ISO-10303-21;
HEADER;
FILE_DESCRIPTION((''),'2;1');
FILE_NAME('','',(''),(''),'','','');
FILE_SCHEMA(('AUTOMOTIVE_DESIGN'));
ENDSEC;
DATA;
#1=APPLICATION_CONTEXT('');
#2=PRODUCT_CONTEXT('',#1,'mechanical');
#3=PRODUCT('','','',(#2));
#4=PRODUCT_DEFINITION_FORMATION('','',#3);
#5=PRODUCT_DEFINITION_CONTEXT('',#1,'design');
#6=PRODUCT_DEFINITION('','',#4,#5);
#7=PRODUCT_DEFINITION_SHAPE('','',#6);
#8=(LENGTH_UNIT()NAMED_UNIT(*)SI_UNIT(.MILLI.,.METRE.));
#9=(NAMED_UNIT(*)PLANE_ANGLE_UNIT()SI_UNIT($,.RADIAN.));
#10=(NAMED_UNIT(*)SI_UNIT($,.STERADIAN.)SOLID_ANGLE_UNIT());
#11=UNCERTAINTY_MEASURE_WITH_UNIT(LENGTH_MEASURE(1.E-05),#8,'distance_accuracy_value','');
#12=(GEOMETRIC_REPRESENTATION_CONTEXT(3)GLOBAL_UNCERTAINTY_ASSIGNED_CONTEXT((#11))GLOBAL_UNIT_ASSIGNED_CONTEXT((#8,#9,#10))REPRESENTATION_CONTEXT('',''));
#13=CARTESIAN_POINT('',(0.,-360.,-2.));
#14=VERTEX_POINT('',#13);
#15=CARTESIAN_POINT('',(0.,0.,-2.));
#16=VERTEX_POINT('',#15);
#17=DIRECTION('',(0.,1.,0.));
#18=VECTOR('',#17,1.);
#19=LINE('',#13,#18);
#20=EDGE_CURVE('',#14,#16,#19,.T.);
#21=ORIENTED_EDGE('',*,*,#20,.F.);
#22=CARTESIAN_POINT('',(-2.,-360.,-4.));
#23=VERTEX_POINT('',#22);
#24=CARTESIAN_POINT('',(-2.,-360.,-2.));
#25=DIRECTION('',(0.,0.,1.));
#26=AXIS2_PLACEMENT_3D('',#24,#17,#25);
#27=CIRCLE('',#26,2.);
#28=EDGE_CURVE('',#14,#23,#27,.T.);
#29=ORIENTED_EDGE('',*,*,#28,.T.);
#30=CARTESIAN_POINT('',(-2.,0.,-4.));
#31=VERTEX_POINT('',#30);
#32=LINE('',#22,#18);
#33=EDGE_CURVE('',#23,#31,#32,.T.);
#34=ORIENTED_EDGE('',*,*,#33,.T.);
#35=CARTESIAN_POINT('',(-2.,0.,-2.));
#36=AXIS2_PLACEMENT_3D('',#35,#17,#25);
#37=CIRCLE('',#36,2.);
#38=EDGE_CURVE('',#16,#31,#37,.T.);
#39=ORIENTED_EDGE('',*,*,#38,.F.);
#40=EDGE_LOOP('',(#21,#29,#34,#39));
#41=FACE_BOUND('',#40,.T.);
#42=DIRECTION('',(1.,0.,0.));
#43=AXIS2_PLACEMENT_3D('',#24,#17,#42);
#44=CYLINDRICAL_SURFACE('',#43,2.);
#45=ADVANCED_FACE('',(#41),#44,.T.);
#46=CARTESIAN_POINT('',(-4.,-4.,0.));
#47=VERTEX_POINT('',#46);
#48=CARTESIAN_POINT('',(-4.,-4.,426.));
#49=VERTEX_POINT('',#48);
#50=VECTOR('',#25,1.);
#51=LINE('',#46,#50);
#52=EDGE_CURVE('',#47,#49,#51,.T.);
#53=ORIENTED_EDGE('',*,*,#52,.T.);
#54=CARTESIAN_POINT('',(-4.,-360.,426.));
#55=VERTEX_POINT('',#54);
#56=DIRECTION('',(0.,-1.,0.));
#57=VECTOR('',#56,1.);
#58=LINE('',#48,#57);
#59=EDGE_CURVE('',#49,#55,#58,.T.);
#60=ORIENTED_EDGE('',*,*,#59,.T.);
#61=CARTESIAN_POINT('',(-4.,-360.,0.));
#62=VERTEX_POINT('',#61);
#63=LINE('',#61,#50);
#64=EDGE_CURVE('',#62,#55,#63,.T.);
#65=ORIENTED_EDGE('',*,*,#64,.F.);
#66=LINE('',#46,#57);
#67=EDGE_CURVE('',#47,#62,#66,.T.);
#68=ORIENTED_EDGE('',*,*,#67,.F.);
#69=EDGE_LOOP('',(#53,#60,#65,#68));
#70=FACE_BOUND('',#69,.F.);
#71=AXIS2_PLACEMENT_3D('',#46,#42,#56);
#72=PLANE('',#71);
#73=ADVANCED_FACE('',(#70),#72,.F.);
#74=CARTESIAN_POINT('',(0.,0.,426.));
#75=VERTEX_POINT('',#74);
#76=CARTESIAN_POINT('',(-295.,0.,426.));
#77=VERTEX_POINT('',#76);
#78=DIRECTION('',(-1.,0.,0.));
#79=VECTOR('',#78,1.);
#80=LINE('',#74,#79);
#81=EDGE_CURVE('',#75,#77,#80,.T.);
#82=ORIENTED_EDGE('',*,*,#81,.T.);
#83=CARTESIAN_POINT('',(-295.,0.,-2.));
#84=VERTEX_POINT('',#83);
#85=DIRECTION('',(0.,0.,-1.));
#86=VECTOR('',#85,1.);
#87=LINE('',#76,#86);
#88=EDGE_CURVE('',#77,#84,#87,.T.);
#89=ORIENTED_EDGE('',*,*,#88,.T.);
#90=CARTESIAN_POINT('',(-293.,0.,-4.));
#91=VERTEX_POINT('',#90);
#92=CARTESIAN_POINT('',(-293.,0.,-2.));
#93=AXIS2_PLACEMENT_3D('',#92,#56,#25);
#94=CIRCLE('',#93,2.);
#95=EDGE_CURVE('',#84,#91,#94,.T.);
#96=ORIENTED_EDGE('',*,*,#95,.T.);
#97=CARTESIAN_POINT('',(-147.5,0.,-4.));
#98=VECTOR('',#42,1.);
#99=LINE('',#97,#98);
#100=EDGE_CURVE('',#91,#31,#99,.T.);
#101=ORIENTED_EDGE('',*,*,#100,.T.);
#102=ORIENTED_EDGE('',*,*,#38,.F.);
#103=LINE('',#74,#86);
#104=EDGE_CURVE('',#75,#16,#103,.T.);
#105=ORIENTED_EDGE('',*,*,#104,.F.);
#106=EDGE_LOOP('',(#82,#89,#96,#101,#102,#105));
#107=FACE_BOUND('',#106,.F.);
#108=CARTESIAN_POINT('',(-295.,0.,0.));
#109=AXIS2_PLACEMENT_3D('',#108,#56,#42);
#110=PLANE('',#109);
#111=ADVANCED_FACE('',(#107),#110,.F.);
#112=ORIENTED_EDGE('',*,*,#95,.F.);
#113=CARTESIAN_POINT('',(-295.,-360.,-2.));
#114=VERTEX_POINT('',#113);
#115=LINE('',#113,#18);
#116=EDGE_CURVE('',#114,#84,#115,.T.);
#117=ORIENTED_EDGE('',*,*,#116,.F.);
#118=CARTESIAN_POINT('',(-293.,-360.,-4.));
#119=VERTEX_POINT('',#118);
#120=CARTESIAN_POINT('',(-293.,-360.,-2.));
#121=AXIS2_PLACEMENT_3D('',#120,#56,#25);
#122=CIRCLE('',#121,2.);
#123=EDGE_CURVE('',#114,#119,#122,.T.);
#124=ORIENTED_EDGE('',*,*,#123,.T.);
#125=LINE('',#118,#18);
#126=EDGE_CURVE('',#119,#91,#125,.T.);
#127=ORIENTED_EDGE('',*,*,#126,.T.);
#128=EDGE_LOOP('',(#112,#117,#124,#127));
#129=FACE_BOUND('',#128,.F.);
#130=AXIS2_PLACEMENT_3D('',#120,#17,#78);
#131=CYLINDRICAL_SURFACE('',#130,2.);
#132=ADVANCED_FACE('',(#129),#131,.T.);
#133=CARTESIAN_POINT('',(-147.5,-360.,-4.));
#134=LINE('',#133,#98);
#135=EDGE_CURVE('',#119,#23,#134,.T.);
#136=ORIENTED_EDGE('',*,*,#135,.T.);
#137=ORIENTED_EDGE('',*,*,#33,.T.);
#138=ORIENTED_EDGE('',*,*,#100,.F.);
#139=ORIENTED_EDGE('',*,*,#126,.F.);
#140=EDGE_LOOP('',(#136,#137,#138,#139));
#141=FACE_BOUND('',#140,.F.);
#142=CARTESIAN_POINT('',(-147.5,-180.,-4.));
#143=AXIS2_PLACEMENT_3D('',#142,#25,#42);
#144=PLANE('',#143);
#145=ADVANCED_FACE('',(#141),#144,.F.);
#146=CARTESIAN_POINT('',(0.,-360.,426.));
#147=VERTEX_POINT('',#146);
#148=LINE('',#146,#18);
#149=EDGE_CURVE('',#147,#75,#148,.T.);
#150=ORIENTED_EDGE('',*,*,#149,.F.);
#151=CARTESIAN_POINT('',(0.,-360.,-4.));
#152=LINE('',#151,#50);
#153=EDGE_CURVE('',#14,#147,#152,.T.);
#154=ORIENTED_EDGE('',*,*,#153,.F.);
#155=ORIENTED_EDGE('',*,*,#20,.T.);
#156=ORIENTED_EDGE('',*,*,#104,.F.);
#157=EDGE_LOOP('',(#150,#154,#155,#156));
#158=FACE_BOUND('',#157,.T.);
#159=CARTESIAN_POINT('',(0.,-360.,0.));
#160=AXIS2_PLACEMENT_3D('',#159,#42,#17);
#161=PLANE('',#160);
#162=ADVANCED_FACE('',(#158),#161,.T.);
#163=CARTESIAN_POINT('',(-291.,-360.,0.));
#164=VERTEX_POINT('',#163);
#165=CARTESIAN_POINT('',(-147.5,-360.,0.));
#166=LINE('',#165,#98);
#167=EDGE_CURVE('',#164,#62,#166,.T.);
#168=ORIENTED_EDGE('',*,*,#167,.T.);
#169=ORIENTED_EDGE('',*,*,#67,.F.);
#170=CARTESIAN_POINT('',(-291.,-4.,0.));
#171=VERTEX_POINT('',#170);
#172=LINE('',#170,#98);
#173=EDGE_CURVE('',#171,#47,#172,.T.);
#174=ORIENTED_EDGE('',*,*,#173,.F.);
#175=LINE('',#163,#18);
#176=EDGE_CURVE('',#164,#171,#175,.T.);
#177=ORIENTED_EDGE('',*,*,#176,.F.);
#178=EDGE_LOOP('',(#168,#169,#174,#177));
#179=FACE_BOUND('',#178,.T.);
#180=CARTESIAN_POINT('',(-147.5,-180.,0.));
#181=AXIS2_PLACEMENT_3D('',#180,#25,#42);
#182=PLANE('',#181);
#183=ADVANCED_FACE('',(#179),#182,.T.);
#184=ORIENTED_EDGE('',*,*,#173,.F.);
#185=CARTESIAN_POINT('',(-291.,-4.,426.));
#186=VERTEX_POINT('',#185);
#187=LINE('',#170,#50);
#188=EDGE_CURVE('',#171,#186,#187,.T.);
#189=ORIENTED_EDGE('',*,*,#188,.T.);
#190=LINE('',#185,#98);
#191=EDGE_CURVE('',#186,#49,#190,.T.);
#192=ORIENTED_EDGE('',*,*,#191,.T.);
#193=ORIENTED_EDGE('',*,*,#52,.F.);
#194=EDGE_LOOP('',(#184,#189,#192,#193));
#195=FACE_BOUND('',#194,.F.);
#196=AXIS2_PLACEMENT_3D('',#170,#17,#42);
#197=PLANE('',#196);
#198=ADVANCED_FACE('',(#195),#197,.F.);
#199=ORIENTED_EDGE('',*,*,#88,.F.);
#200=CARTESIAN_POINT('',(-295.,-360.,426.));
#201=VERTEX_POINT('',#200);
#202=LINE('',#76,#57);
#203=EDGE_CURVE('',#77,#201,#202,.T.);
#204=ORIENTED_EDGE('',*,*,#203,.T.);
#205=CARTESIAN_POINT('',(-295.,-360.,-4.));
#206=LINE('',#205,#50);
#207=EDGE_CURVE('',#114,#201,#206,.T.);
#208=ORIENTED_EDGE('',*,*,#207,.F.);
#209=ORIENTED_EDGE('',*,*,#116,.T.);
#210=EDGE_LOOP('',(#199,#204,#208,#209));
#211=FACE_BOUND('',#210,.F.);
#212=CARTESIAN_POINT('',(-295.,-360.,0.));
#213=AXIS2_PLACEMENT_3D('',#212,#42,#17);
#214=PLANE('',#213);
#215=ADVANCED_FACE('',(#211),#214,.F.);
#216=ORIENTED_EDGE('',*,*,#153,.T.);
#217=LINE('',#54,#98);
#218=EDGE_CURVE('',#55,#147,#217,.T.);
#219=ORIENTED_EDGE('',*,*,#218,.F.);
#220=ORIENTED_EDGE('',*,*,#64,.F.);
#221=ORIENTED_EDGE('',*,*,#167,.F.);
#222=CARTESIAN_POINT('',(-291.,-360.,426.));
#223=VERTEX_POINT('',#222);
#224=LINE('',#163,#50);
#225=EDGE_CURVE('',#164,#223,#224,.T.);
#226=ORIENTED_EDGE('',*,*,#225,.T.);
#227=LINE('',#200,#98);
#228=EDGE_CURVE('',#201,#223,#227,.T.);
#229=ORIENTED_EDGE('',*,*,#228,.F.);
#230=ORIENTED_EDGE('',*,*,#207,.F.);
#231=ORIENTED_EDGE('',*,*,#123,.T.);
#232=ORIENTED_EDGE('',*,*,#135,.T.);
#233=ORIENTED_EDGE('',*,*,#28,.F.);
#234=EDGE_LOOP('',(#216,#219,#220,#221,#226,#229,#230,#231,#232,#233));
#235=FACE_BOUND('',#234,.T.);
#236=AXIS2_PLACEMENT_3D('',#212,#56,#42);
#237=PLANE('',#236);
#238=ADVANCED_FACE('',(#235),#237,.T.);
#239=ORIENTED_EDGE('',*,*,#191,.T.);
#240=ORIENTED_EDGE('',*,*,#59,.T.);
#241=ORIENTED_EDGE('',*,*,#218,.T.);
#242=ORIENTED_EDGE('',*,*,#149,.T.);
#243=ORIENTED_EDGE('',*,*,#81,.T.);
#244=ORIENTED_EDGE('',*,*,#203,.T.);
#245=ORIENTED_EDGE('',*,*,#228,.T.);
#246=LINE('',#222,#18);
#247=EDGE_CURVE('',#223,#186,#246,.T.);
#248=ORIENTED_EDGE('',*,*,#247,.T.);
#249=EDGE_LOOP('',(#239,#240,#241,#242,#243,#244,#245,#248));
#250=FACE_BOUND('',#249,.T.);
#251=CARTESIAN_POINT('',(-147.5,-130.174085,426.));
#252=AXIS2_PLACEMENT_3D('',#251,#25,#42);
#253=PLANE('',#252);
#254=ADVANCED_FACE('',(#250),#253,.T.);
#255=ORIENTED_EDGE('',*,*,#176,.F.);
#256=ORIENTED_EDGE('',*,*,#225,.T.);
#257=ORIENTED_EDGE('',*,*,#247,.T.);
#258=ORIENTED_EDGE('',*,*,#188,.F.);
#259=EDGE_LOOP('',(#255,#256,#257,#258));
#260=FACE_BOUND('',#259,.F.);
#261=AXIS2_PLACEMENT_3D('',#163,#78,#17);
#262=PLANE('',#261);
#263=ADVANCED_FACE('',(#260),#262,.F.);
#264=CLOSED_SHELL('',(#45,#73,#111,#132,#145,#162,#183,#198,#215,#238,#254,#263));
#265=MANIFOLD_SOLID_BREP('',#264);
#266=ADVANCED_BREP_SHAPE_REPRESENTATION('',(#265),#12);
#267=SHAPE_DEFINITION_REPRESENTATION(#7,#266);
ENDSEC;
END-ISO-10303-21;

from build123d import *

# Parameters (mm, degrees)
F1_DEPTH = 426
F2_W     = 295
F2_H     = 360
F3_DEPTH = 4
F4_R     = 2


# Not quite as in the source:
# - a feature names something its author has since deleted; it is built from what else it names


with BuildPart() as f1:
    # F0 (on Top) → F1 (new body)
    with BuildSketch(Plane.XY):
        Polygon((-4, -360), (0, -360), (0, 0), (-295, 0), (-295, -360), (-291, -360), (-291, -4), (-4, -4), align=None)
    extrude(amount=F1_DEPTH)

    # F2 (on Top) → F3 (join)
    with BuildSketch(Plane.XY):
        with Locations((-147.5, -180)):
            Rectangle(F2_W, F2_H)
    extrude(amount=-F3_DEPTH)

    # F4
    f4_edges = [f1.edges().sort_by_distance(p)[0] for p in [
        (-295, -180, -4),
        (0, -180, -4),
    ]]
    fillet(f4_edges, radius=F4_R)


solid = f1.part
